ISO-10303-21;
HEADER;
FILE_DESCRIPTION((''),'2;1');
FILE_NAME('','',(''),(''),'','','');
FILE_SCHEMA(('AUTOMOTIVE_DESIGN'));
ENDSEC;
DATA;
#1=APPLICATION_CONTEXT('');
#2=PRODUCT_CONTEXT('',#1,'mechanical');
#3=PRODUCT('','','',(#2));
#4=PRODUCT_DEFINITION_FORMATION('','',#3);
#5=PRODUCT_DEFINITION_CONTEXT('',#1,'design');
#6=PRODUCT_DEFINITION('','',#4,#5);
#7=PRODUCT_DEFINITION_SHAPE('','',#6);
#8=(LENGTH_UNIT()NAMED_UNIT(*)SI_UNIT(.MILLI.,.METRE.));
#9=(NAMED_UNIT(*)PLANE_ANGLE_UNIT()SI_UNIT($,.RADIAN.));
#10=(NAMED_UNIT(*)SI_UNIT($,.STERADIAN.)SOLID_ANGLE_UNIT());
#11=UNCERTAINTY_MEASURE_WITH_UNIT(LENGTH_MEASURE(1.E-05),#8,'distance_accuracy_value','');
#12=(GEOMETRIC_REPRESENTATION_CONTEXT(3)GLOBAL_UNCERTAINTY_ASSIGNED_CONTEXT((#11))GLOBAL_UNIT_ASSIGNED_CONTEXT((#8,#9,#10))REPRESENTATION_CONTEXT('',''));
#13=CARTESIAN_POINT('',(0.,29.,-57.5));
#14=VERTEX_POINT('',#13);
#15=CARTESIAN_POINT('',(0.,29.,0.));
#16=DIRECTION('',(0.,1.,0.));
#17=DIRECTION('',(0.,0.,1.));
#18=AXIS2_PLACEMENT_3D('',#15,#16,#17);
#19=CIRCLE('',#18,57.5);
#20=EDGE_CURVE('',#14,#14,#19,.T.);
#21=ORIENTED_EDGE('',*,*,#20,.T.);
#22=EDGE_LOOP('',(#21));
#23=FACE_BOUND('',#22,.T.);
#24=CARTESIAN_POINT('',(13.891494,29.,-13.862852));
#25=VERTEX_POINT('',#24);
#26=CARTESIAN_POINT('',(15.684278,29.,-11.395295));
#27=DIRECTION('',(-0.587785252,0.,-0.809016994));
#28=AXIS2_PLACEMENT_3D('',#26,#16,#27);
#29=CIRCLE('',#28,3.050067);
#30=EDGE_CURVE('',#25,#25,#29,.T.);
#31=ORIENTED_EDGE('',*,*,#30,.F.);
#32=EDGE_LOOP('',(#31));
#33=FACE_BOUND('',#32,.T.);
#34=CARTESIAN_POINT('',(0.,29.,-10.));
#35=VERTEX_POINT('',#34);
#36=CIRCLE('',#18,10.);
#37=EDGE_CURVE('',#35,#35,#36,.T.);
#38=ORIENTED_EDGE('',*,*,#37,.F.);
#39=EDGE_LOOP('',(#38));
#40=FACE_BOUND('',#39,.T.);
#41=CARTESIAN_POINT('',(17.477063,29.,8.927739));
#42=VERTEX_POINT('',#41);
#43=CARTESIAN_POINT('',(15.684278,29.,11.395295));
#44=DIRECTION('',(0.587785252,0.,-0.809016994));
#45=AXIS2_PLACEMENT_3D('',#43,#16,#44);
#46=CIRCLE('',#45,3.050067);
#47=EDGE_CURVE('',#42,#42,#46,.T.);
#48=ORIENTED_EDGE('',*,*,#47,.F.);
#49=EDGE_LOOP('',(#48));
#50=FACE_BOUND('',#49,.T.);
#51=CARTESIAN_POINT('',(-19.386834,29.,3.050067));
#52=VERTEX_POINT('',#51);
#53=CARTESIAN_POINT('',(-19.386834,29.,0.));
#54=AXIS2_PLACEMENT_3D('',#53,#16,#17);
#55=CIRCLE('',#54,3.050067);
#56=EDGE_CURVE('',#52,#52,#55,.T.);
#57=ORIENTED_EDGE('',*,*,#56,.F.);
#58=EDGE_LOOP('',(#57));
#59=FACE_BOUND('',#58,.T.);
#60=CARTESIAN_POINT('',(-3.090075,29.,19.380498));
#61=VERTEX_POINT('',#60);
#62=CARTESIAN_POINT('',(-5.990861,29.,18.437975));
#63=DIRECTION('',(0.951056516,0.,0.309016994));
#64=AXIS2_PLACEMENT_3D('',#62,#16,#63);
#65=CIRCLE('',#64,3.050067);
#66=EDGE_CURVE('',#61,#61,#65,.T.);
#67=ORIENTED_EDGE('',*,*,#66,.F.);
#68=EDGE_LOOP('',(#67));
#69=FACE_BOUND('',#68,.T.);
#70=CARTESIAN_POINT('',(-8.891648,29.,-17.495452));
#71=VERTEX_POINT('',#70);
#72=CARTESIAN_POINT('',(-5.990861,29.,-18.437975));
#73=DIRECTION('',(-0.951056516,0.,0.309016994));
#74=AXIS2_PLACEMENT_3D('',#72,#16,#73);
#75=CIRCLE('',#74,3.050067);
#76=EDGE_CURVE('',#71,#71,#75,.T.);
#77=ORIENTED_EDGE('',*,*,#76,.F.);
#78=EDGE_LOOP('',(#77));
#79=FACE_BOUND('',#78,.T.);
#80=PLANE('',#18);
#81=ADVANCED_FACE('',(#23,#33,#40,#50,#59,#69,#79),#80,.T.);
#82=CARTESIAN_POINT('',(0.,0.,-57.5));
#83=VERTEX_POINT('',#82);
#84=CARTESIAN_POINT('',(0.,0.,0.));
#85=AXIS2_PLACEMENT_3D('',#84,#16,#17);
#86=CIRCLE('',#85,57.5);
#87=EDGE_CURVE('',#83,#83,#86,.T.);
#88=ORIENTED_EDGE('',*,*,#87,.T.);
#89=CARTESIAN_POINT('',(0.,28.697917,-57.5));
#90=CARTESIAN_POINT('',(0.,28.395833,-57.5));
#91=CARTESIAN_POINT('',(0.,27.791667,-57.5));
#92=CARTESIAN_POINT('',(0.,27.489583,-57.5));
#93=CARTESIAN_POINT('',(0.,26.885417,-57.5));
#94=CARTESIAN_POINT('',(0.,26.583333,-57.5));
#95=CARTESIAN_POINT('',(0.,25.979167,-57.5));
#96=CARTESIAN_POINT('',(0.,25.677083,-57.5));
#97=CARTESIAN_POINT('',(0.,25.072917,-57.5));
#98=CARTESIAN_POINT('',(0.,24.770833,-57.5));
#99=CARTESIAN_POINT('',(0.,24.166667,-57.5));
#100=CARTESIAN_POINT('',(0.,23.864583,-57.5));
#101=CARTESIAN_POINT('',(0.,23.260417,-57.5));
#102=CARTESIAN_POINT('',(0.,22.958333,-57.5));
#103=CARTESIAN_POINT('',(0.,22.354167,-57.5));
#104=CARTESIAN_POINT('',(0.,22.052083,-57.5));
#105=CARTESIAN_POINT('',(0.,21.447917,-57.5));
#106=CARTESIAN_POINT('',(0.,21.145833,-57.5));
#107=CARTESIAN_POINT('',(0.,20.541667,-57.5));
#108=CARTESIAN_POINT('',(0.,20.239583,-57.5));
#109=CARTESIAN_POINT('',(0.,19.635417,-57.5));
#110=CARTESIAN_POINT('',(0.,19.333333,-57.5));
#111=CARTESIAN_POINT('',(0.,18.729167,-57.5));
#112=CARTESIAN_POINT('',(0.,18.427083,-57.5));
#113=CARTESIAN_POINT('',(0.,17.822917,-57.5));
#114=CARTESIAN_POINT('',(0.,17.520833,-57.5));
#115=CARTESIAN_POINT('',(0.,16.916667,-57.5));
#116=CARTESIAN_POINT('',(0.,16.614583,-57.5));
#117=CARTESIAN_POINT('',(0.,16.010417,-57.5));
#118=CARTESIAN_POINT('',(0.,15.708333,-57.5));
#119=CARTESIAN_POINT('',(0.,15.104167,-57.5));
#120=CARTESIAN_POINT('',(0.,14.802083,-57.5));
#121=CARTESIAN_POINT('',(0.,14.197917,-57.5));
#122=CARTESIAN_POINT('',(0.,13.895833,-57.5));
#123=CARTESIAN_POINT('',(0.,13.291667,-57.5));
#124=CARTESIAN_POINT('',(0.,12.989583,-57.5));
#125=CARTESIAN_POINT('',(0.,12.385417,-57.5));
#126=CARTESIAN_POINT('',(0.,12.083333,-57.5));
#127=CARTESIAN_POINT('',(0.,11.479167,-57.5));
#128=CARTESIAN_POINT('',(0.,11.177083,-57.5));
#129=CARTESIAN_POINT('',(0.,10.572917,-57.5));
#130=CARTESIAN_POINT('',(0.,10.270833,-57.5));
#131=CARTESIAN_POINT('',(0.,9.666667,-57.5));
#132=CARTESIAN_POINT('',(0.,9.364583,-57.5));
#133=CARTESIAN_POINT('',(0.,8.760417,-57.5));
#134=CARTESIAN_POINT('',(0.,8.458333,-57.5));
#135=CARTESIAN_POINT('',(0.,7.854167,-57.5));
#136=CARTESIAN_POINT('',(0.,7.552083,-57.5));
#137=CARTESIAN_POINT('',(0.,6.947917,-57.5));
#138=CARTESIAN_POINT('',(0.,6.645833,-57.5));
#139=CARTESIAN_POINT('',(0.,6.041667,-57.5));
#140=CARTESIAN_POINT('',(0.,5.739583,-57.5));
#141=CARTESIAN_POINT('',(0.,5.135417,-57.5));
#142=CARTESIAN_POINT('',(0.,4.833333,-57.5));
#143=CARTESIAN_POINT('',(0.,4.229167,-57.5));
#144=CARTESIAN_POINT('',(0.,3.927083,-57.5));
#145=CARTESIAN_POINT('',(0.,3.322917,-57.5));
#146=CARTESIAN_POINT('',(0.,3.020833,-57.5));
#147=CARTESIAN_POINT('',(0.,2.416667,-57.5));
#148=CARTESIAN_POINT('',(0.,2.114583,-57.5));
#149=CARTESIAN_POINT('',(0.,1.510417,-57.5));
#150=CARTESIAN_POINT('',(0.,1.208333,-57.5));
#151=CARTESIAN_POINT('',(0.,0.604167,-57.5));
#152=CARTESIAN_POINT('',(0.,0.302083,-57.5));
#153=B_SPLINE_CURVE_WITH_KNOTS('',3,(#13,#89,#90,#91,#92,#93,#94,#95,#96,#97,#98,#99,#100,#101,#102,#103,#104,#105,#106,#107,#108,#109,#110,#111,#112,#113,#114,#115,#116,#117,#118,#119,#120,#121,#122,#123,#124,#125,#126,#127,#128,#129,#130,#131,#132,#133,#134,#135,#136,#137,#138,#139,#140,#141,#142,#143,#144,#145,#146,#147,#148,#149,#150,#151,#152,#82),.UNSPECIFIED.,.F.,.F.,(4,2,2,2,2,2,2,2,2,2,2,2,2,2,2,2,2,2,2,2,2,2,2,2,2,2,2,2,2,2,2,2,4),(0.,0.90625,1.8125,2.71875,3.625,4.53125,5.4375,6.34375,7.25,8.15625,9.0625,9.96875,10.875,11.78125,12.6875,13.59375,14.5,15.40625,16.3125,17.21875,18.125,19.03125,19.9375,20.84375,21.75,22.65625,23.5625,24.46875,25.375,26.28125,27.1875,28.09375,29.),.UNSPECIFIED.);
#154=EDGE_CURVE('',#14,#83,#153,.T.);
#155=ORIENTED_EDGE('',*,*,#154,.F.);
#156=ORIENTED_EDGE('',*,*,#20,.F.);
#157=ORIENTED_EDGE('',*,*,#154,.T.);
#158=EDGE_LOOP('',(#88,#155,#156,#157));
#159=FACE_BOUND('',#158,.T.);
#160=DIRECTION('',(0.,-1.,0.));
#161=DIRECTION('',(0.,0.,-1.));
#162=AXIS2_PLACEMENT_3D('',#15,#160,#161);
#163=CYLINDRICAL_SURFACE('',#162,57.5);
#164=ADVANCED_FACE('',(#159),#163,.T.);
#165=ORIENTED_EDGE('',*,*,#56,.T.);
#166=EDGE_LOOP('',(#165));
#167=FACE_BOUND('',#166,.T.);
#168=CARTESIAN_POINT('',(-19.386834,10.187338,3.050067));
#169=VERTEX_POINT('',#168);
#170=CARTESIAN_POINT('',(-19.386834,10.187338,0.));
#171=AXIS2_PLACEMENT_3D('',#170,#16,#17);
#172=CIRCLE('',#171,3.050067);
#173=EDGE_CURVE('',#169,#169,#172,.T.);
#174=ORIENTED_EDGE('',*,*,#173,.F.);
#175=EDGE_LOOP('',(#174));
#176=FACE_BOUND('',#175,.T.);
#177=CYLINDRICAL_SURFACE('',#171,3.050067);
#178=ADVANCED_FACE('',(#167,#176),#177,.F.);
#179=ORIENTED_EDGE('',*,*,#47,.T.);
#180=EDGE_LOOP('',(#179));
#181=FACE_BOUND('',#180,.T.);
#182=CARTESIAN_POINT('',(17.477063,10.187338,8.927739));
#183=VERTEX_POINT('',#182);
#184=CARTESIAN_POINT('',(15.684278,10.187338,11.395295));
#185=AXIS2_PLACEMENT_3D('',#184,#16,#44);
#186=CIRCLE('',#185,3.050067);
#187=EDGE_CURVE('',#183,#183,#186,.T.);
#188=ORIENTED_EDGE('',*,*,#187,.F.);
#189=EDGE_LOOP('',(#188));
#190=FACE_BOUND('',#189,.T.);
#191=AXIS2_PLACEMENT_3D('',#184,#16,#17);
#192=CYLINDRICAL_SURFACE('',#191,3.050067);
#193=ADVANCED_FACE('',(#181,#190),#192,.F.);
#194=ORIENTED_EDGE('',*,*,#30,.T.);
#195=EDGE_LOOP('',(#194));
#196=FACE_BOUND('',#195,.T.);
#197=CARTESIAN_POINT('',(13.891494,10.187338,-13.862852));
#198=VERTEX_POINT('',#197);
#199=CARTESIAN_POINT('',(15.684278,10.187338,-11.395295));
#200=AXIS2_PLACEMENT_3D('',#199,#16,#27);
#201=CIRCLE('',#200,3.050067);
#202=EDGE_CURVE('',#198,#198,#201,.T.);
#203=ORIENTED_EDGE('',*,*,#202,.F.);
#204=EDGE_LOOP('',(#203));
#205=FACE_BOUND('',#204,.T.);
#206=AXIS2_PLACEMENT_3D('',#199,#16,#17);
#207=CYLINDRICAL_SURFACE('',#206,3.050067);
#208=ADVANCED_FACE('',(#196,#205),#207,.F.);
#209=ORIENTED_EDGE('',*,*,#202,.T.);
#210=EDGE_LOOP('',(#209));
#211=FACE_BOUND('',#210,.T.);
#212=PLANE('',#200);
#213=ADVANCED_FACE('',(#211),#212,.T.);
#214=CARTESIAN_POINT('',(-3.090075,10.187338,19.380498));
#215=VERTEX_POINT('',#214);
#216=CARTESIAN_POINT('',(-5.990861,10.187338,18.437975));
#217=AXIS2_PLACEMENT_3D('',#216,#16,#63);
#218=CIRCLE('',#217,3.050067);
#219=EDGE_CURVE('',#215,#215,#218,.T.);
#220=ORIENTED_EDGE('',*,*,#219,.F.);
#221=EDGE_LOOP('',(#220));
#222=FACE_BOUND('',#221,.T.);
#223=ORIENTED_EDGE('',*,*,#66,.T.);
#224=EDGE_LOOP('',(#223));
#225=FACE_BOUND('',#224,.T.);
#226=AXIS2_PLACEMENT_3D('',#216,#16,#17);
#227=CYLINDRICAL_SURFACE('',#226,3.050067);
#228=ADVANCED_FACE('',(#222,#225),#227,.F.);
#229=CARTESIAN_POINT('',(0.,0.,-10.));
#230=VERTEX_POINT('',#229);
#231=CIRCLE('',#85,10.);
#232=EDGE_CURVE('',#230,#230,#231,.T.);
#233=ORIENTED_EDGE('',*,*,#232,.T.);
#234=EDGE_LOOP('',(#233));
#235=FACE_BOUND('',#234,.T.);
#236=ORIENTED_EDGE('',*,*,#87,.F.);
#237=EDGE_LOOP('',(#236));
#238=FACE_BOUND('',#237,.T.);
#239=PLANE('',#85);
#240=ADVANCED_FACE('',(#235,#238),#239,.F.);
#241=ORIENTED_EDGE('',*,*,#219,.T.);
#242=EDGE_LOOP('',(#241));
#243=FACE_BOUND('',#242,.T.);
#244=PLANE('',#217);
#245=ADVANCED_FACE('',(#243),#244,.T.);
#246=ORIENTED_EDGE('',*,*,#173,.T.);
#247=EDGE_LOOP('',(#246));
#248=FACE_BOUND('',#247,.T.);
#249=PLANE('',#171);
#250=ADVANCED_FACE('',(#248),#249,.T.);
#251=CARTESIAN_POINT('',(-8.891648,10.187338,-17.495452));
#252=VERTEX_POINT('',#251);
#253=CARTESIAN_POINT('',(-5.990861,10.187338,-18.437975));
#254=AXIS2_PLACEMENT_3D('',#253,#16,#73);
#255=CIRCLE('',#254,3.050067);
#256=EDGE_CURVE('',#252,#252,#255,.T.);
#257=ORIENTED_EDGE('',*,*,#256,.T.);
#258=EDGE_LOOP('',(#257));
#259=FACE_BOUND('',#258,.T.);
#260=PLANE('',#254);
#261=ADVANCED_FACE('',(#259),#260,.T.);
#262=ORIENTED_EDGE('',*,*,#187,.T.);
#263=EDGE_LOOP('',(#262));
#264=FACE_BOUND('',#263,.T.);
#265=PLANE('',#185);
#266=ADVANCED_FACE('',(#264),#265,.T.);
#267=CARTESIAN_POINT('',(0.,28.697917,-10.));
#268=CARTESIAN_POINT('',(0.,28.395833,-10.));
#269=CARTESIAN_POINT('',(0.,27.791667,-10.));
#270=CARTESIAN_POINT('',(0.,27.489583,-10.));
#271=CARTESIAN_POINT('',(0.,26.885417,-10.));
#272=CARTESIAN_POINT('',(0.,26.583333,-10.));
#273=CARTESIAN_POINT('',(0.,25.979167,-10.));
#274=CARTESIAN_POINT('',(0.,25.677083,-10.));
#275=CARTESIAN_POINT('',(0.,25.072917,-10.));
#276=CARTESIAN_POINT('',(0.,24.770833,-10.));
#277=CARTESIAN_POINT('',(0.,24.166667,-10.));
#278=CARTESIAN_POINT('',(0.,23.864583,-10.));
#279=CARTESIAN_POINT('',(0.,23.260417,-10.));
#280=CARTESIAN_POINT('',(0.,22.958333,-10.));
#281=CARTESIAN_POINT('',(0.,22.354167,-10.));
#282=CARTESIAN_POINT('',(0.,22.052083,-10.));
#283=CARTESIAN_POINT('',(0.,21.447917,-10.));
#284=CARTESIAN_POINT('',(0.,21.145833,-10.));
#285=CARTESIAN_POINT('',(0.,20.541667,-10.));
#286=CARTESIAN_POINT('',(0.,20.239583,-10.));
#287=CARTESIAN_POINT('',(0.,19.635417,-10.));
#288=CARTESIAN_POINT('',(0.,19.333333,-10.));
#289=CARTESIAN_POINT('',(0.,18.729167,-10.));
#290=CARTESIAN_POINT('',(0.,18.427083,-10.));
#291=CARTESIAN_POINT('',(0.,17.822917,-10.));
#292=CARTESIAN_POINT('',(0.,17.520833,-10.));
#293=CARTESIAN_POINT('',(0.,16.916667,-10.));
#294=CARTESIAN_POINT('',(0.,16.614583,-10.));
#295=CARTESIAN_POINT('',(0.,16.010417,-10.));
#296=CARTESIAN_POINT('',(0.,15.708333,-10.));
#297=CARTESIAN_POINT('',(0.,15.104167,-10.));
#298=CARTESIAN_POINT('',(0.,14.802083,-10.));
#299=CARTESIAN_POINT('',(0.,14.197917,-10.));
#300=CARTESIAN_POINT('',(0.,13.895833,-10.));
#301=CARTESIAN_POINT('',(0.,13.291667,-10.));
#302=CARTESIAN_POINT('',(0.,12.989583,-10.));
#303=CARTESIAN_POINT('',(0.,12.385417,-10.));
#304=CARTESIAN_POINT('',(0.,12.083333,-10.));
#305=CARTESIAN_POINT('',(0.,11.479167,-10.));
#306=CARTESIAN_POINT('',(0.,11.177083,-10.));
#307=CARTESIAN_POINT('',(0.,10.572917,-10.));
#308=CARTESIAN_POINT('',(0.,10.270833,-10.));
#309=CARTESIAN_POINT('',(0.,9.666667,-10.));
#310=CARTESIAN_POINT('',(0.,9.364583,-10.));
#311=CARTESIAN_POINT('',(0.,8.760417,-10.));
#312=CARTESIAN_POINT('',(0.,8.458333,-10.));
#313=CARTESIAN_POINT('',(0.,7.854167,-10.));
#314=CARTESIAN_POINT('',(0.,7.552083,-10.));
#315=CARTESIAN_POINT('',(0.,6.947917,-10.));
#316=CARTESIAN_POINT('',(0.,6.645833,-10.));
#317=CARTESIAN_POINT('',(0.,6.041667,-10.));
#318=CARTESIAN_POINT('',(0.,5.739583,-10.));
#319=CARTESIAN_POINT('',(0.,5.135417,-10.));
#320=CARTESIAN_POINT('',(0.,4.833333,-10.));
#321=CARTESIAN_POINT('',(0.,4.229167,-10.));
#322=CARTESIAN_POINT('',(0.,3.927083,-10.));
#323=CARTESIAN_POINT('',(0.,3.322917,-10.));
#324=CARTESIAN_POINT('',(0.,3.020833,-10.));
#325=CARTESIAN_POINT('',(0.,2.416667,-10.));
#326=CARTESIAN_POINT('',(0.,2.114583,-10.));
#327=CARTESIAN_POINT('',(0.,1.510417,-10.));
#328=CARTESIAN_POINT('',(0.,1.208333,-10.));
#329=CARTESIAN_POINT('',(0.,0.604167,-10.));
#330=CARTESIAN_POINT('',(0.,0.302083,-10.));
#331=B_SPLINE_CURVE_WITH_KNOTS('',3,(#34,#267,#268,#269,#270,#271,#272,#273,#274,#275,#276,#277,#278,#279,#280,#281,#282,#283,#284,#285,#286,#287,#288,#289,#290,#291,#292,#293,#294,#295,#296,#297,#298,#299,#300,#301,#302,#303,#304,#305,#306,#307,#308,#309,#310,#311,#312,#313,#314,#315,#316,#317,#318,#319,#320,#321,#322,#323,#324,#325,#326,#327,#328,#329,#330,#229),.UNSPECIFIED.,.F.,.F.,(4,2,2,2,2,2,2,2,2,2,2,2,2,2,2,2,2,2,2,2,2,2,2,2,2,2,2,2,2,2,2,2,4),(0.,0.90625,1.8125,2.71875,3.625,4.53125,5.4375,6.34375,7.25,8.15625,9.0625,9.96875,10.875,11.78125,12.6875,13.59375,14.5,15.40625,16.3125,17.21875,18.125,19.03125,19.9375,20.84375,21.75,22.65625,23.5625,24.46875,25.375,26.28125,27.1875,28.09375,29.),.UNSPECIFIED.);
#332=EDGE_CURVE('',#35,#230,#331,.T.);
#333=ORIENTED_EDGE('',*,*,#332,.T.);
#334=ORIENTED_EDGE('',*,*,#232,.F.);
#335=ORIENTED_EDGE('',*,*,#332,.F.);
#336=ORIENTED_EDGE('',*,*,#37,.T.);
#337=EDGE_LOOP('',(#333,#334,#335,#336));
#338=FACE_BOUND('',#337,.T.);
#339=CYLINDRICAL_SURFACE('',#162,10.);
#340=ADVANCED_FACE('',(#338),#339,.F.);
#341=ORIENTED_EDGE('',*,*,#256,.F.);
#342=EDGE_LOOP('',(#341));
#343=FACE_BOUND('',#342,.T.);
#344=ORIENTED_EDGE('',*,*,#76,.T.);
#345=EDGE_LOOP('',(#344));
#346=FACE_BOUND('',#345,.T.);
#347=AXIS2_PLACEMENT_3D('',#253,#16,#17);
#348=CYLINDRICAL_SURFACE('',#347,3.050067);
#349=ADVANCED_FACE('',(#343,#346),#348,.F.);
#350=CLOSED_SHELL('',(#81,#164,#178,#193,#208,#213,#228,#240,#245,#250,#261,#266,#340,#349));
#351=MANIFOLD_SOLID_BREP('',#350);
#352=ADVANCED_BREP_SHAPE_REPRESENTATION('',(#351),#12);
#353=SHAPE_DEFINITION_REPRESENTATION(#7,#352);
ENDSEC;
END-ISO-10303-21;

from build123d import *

# Parameters (mm, degrees)
SKETCH1_R           = 57.5
BOSS_EXTRUDE1_DEPTH = 29
SKETCH2_R           = 10
CUT_EXTRUDE1_DEPTH  = 87.333655083
SKETCH3_R           = 3.050067487
CUT_EXTRUDE2_DEPTH  = 18.812661923
CIRPATTERN1_COUNT   = 5


with BuildPart() as part:
    # Sketch1 → Boss-Extrude1 (new body)
    with BuildSketch(Plane(origin=(0, 0, 0), x_dir=(1, 0, 0), z_dir=(0, 1, 0))):
        Circle(SKETCH1_R)
    extrude(amount=BOSS_EXTRUDE1_DEPTH)

    # Sketch2 → Cut-Extrude1 (cut, through all)
    with BuildSketch(Plane(origin=(0, 0, 0), x_dir=(1, 0, 0), z_dir=(0, 1, 0))):
        Circle(SKETCH2_R)
    extrude(amount=CUT_EXTRUDE1_DEPTH, mode=Mode.SUBTRACT)

    # Sketch3 → Cut-Extrude2 (cut)
    with BuildSketch(Plane(origin=(0, 29, 0), x_dir=(1, 0, 0), z_dir=(0, 1, 0))):
        with Locations((-19.38683408, 0)):
            Circle(SKETCH3_R)
    cut_extrude2 = extrude(amount=-CUT_EXTRUDE2_DEPTH, mode=Mode.SUBTRACT)

    # CirPattern1: Cut-Extrude2 ×5 about axis
    cirpattern1_axis = Axis((0, 0, 0), (0, 1, 0))
    for i in range(1, CIRPATTERN1_COUNT):
        add(cut_extrude2.rotate(cirpattern1_axis, i * 360 / CIRPATTERN1_COUNT), mode=Mode.SUBTRACT)


solid = part.part
